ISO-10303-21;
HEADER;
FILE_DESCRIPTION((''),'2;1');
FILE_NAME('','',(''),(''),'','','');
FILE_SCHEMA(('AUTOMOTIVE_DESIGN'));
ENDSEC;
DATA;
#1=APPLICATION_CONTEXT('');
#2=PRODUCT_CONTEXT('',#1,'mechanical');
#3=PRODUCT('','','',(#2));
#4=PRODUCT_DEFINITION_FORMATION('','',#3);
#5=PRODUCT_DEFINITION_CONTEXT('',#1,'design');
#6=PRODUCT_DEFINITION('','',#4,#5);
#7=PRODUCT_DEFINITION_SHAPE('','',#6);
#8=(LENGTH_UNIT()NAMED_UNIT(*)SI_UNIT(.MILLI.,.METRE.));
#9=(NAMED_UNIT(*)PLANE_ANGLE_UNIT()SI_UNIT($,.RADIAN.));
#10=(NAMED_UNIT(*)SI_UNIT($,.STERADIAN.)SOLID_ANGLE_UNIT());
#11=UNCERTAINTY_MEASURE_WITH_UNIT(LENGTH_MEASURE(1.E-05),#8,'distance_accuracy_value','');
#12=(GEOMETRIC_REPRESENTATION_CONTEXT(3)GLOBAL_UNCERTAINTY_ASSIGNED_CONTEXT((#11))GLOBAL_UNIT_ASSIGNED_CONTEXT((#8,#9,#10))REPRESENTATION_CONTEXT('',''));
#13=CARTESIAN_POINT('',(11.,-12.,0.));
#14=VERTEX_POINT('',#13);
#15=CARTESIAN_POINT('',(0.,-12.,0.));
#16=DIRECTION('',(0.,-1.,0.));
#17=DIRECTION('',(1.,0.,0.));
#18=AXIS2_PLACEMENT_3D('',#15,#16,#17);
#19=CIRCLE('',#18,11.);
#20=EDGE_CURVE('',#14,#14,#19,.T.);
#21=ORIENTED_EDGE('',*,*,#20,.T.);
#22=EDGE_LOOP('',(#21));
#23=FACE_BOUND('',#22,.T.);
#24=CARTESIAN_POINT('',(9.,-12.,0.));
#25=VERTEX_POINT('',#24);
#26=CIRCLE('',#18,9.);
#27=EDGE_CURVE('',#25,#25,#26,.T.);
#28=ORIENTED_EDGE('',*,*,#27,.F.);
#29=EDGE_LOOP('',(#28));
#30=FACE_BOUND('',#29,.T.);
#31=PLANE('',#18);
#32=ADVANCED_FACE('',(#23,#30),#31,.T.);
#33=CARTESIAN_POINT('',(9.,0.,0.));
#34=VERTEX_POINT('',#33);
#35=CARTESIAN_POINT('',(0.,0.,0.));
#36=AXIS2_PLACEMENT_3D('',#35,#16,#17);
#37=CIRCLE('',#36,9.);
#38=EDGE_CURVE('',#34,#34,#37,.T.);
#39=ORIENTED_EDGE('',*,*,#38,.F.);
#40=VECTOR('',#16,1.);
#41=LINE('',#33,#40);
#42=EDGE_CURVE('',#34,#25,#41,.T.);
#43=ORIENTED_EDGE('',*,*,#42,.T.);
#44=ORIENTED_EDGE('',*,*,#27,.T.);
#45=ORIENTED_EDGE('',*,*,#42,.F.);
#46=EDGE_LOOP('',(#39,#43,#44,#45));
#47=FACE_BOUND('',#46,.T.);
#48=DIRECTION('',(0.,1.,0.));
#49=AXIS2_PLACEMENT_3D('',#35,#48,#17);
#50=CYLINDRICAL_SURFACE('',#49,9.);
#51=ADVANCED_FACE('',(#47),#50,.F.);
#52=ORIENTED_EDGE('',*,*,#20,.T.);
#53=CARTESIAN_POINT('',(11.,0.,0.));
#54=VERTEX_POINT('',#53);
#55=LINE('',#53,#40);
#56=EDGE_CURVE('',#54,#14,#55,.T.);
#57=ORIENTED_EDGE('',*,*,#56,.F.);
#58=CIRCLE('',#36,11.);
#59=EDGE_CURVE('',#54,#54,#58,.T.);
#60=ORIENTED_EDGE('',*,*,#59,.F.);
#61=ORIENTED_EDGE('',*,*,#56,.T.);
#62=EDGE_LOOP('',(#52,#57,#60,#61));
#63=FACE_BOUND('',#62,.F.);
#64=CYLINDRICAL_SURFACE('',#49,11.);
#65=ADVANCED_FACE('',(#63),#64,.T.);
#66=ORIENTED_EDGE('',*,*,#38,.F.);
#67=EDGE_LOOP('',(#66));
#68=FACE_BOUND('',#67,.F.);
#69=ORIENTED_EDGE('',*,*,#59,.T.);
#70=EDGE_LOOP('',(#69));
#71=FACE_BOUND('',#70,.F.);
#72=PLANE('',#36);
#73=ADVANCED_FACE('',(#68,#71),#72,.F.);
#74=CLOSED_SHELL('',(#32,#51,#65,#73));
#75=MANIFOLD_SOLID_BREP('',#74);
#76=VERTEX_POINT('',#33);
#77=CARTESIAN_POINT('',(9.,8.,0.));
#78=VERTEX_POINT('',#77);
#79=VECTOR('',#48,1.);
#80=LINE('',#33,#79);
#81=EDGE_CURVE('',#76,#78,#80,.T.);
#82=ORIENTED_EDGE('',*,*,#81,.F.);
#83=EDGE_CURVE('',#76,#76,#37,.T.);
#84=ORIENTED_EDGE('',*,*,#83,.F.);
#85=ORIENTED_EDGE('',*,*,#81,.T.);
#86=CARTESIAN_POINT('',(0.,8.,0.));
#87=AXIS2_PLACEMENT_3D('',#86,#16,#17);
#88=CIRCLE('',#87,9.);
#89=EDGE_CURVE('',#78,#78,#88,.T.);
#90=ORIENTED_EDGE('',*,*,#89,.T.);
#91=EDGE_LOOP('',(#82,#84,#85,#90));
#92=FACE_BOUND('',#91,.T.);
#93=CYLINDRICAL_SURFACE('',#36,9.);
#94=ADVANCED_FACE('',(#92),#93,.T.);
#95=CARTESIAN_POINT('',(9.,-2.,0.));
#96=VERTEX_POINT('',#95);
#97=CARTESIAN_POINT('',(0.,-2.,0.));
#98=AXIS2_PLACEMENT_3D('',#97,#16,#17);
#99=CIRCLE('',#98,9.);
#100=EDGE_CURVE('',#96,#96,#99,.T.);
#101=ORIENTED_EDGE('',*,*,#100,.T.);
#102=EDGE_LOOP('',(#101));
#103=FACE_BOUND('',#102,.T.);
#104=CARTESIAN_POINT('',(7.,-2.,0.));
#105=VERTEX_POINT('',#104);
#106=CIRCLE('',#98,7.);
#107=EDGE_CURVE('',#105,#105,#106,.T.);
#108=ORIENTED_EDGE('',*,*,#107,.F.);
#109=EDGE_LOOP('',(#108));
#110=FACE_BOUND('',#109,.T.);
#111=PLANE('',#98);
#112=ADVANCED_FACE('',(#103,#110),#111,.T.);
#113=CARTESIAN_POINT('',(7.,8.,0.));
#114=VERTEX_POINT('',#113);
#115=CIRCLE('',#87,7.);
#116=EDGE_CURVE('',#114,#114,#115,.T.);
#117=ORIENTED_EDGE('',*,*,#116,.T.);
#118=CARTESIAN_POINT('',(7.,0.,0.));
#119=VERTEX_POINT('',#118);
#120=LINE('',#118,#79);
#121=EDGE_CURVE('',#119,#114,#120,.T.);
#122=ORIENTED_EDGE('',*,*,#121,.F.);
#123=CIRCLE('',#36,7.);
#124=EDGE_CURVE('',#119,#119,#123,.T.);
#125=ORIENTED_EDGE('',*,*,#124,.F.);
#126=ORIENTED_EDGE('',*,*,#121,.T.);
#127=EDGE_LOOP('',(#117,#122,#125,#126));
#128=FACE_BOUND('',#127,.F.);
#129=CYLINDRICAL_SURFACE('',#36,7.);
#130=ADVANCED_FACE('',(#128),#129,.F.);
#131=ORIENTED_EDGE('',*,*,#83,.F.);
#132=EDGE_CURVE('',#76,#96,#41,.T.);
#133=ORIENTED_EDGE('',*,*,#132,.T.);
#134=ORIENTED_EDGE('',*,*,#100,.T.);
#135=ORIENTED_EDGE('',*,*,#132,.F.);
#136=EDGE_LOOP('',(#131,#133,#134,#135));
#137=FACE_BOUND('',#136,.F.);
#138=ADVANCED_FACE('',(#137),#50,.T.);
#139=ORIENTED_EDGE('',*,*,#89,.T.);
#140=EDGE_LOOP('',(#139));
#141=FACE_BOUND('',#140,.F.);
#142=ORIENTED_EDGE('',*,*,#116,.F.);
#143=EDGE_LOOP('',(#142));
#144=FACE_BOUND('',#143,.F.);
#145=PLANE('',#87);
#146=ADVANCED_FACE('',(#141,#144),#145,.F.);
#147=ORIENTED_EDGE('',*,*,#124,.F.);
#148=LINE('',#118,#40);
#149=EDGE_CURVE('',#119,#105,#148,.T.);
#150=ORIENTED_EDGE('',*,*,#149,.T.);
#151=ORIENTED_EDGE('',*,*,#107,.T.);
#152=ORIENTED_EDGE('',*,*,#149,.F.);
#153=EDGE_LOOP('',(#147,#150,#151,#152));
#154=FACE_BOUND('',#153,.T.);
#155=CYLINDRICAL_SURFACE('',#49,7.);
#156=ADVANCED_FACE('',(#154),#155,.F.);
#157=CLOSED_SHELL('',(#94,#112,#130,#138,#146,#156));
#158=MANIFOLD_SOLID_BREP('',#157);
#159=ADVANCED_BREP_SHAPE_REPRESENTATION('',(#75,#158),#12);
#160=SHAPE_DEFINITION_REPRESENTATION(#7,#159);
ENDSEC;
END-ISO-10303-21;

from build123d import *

# Parameters (mm, degrees)
F0_R          = 11
F0_R_2        = 9
F1_DEPTH      = 12
F0_R_3        = 7
F2_DEPTH      = 8
F2_DEPTH_BACK = 2


# Not quite as in the source:
# - a feature names something its author has since deleted; it is built from what else it names


with BuildPart() as f1:
    # F0 (on Front) → F1 (new body)
    with BuildSketch(Plane.XZ):
        Circle(F0_R)
        Circle(F0_R_2, mode=Mode.SUBTRACT)
    extrude(amount=F1_DEPTH)


with BuildPart() as f2:
    # F0 (on Front) → F2 (new body, two sides)
    with BuildSketch(Plane.XZ) as f2_sk:
        Circle(F0_R_2)
        Circle(F0_R_3, mode=Mode.SUBTRACT)
    extrude(amount=-F2_DEPTH)
    extrude(f2_sk.sketch, amount=F2_DEPTH_BACK)


solid = Compound([f1.part, f2.part])
